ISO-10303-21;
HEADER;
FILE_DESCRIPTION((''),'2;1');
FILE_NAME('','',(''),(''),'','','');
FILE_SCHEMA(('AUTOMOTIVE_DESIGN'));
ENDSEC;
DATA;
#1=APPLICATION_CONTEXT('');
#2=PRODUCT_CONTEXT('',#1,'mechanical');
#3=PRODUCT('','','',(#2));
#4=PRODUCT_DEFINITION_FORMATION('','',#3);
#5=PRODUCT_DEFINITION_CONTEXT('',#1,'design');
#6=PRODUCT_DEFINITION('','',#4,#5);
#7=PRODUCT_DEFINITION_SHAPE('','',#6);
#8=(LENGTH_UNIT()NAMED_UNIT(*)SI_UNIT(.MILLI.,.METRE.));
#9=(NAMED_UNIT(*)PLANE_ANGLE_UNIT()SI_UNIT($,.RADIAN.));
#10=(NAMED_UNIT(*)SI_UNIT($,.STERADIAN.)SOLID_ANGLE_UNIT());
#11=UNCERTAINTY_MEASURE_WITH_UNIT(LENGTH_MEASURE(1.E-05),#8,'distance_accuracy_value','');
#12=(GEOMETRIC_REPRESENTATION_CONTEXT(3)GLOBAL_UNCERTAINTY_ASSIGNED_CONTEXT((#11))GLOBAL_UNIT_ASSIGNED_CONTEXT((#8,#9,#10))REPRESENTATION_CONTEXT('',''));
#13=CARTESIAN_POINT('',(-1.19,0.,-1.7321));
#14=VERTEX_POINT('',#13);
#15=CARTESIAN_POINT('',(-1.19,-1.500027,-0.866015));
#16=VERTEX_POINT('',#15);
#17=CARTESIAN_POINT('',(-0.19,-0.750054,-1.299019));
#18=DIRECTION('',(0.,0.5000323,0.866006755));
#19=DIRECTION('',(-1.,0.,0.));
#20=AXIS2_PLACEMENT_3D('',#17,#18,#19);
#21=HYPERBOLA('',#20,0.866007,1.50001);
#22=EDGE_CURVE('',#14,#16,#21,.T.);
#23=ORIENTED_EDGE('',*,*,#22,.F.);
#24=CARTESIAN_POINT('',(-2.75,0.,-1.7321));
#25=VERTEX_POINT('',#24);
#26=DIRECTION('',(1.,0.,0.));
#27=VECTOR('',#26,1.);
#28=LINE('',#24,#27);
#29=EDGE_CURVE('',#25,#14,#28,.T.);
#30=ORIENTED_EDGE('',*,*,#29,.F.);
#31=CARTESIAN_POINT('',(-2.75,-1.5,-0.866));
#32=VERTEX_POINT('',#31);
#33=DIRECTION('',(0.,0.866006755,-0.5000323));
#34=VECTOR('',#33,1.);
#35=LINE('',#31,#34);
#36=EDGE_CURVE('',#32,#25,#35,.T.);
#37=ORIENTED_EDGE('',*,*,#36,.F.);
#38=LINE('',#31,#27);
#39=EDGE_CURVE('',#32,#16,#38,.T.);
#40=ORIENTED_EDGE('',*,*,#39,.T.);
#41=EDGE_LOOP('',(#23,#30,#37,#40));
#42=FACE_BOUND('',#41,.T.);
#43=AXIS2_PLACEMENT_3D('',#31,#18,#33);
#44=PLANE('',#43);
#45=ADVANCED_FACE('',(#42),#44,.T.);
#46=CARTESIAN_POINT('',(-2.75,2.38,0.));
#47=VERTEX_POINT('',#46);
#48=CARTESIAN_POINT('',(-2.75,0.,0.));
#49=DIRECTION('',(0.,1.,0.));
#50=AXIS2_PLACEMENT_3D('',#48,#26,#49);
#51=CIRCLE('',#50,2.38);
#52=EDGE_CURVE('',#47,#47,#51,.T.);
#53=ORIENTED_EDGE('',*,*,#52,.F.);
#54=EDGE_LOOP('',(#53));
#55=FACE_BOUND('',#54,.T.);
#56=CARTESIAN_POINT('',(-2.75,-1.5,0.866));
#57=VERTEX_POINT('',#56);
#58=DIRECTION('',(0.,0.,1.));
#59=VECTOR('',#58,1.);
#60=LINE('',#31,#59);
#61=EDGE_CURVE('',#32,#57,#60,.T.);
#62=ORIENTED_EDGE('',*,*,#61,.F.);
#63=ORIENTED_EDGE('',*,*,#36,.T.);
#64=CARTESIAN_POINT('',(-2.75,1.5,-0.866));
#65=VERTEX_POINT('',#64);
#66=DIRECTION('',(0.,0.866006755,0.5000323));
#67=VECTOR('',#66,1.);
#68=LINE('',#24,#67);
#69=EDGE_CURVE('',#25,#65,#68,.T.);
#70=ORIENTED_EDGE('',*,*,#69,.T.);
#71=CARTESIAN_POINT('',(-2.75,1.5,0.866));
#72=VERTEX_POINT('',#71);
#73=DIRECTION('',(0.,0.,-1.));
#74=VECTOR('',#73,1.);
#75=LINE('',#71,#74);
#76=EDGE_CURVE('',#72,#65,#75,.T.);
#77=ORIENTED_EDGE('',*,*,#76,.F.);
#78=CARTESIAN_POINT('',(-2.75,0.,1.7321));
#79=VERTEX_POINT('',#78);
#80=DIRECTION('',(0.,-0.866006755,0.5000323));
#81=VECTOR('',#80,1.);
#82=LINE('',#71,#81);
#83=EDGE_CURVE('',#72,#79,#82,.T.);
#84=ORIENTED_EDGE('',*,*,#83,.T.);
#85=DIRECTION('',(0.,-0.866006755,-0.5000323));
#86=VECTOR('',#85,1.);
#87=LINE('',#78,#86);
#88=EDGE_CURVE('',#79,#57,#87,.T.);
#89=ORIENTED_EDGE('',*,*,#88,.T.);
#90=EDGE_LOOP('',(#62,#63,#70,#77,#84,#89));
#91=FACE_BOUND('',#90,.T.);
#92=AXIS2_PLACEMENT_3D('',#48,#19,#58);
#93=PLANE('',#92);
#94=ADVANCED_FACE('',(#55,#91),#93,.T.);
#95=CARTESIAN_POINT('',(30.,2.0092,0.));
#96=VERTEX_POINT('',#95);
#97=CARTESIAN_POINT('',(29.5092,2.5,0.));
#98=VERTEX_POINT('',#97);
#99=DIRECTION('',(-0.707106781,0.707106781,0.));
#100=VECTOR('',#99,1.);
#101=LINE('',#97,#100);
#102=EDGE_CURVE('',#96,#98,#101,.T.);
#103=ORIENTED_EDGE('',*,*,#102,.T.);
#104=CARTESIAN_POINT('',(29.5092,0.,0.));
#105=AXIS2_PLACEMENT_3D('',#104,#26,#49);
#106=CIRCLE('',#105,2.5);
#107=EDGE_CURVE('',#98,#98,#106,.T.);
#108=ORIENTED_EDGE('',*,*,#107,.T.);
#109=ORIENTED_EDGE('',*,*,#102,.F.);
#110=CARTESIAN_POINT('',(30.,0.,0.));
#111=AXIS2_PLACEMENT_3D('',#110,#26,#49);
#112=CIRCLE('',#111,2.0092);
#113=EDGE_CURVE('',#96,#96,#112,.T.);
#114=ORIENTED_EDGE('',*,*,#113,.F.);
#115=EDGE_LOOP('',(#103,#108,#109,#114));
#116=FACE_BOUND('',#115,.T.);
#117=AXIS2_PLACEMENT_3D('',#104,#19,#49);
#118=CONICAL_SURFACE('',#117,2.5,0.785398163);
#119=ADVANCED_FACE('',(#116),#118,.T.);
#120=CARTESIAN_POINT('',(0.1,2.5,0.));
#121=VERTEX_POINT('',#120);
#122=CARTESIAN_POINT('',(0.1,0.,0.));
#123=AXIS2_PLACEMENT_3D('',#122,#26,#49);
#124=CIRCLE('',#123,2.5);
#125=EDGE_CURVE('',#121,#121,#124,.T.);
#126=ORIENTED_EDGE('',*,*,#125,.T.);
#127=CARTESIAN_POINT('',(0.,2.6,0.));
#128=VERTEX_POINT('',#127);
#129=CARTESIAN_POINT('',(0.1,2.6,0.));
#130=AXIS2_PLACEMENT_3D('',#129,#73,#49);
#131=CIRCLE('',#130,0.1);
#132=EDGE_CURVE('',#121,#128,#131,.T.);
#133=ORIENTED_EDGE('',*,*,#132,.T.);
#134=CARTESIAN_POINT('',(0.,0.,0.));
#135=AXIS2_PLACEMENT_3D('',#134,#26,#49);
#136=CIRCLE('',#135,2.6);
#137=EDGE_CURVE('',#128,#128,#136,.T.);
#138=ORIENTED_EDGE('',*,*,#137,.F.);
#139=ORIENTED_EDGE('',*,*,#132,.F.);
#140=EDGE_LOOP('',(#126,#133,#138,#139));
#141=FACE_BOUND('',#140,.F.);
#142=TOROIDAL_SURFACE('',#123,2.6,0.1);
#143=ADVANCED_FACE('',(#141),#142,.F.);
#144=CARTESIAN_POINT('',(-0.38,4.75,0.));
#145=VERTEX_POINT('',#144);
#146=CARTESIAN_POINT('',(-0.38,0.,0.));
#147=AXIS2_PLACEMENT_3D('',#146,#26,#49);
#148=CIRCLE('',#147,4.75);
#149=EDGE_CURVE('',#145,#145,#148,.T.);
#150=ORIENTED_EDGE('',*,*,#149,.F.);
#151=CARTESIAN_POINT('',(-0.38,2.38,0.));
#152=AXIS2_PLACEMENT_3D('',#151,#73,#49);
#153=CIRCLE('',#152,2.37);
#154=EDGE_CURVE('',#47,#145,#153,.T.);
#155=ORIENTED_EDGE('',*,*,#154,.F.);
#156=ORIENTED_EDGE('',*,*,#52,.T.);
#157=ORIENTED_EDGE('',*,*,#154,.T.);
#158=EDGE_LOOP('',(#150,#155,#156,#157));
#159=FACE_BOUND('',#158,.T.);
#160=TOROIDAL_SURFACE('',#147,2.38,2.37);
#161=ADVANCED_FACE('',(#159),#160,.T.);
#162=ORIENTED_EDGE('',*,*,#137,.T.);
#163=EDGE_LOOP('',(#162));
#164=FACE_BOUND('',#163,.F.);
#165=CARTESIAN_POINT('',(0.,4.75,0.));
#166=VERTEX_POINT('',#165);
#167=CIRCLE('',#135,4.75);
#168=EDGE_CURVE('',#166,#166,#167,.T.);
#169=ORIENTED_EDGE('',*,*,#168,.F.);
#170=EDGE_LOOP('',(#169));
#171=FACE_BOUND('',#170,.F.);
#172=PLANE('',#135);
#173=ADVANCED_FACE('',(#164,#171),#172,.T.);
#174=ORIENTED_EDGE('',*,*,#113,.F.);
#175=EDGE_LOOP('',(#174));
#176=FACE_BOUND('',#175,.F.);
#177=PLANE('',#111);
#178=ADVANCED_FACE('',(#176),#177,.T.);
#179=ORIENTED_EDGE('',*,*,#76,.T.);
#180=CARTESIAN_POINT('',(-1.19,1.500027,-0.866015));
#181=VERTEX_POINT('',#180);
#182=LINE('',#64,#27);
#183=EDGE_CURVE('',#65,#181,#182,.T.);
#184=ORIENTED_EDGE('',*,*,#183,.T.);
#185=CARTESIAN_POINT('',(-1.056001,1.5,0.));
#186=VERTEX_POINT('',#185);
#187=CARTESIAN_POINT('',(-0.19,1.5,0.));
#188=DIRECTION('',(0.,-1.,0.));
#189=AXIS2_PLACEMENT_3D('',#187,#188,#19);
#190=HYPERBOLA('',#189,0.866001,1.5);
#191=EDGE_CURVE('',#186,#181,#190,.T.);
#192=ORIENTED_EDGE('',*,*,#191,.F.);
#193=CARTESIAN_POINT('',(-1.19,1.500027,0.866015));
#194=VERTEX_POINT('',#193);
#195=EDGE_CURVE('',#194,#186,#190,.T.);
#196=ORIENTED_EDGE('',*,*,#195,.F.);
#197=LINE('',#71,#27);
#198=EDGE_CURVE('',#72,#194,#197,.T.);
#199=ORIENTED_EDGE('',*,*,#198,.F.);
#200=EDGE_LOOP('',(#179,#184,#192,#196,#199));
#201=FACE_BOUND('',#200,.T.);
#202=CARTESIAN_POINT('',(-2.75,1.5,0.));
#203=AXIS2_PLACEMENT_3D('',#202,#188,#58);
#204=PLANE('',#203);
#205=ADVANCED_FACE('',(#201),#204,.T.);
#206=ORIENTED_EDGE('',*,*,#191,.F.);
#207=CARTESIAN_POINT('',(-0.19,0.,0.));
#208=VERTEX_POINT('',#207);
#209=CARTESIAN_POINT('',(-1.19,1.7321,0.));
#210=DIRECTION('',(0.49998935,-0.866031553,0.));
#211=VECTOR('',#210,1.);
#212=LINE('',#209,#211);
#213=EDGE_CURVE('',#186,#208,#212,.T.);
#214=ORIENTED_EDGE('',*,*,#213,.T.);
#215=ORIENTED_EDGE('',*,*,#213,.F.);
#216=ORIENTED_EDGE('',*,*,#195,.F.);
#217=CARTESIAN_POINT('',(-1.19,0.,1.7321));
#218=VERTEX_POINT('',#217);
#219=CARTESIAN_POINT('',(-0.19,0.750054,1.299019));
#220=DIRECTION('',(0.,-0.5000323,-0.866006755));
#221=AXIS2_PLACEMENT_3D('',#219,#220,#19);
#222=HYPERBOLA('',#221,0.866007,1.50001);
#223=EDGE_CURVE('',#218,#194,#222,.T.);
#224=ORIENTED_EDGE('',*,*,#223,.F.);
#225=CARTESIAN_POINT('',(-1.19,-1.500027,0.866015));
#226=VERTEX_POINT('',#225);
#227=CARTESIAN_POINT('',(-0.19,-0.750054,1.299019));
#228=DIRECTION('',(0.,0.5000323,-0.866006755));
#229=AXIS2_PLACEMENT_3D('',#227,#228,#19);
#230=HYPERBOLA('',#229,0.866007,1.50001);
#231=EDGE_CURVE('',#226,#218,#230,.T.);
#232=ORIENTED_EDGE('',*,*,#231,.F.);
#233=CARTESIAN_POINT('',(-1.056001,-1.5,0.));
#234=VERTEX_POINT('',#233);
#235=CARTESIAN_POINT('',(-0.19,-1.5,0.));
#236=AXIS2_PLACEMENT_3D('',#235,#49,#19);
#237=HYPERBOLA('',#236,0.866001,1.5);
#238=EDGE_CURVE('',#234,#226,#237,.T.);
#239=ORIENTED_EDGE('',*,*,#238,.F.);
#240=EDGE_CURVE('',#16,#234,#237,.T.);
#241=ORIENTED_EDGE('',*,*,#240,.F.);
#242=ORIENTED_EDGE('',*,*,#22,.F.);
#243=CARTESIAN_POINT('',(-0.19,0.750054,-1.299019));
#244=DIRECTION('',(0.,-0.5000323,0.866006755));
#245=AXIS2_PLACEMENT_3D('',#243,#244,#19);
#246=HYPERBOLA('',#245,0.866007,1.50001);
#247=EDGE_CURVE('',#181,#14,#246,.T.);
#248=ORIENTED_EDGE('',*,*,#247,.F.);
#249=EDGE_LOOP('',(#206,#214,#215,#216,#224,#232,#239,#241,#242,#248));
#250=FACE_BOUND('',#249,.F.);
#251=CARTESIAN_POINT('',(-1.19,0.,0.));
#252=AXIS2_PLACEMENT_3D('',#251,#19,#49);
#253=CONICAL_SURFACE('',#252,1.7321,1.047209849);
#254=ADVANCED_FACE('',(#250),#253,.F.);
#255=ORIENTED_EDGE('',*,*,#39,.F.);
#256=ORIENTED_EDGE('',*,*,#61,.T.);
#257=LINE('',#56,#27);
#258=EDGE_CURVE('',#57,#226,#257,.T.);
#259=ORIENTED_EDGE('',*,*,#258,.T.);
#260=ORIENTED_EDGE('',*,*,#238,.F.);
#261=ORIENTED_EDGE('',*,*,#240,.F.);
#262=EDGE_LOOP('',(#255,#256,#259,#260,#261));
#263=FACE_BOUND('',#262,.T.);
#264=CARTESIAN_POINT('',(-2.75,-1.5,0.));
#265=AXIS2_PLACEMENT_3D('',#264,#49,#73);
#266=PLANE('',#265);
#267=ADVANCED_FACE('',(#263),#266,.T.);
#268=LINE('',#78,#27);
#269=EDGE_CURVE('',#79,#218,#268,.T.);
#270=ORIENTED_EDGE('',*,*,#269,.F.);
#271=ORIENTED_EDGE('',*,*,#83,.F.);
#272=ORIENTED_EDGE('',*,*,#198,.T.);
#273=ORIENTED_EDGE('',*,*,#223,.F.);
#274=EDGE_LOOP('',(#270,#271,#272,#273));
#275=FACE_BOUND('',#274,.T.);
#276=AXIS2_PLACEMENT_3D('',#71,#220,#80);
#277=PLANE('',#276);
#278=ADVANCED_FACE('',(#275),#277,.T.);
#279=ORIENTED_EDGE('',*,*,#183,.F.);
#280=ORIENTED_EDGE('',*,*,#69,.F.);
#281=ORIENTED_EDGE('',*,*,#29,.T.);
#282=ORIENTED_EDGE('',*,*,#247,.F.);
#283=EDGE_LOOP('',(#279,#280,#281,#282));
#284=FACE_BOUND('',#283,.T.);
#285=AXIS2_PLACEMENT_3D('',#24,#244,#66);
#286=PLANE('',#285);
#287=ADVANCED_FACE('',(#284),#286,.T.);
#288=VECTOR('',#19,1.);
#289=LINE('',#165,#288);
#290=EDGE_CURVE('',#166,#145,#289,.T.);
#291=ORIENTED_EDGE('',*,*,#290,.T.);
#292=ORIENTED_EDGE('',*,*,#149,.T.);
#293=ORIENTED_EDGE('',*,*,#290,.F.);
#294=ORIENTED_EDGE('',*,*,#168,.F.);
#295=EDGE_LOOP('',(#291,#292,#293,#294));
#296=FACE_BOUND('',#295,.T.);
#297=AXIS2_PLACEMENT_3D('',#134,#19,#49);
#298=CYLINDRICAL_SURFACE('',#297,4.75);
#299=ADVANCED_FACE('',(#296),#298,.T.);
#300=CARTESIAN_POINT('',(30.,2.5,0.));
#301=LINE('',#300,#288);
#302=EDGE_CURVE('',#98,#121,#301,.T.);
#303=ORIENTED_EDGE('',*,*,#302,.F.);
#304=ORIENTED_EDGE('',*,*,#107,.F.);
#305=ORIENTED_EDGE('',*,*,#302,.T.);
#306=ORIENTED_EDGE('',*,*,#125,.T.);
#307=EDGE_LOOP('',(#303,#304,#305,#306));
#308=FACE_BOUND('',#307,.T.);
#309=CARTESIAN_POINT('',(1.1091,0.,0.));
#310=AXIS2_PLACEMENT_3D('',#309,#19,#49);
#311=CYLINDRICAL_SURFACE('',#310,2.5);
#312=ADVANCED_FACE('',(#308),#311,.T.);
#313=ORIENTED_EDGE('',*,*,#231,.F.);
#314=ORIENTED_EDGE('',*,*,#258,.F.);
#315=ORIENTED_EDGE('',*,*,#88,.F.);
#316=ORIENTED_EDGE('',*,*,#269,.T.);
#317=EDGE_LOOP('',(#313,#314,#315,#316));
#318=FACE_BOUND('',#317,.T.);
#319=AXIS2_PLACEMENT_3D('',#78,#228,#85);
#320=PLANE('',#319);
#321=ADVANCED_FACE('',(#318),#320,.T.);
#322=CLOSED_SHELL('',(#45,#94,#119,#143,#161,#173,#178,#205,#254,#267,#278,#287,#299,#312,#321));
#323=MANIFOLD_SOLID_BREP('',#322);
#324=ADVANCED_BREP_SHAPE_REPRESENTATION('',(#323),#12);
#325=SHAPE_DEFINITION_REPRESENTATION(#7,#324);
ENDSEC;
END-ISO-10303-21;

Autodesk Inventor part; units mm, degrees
ref_plane "YZ Plane" through (0, 0, 0) normal (1, 0, 0) x (0, 1, 0)
ref_plane "XZ Plane" through (0, 0, 0) normal (0, 1, 0) x (-1, 0, 0)
sketch "Sketch1" plane through (0, 0, 0) normal (0, 0, 1) x (1, 0, 0)
  line L0 (-0.19, 0) -> (30, 0)
  line L1 (30, 0) -> (30, 2.5)
  line L2 (30, 2.5) -> (1.6, 2.5)
  line L3 (1.6, 2.5) -> (1.1091, 2.5)
  line L4 (1.1091, 2.5) -> (0, 2.5)
  line L5 (0, 2.5) -> (0, 4.75)
  line L6 (0, 4.75) -> (-2.75, 4.75)
  line L7 (-2.75, 4.75) -> (-2.75, 1.7321)
  line L8 (-2.75, 1.7321) -> (-1.19, 1.7321)
  line L9 (-1.19, 1.7321) -> (-0.19, 0)
  line L10 (-9.3, 0) -> (36.55, 0) projected
  line L11 (0, -0.95) -> (0, 5.7) projected
  line L12 (1.6, 2.5) -> (0, 2.5) construction
  dimension "d1" = 28.4
  dimension "d2" = 0.4909
  dimension "d3" = 2.75
  dimension "d4" = 1.56
  dimension "d5" = 60
  dimension "d6" = 5
  dimension "d7" = 5
  dimension "d8" = 3.4641
  dimension "d9" = 9.5
  dimension "d26" = 30
revolve "Body" add sketch "Sketch1" angle 360 about axis through (-0.19, 0, 0) along (1, 0, 0)
sketch "Sketch2" plane through (-2.75, 0, 0) normal (-1, 0, 0) x (0, 0, 1)
  circle A0 centre (0, 0) radius 1.7321 projected
  line L0 (0, -6.65) -> (0, 6.65) projected
  line L1 (-6.65, 0) -> (6.65, 0) projected
  line L2 (1.7321, 0) -> (0.866, -1.5)
  line L3 (0.866, -1.5) -> (-0.866, -1.5)
  line L4 (-0.866, -1.5) -> (-1.7321, 0)
  line L5 (-1.7321, 0) -> (-0.866, 1.5)
  line L6 (-0.866, 1.5) -> (0.866, 1.5)
  line L7 (0.866, 1.5) -> (1.7321, 0)
extrude "Slot" add sketch "Sketch2" against normal up to next contours L7 A0 | A0 L2 | L6 L0 A0 | A0 L0 L3 | L0 L6 A0 | A0 L3 L0 | L4 A0 | A0 L5
fillet "Fillet1" radius 2.37 1 edges at (-2.75, -4.75, 0)
thread "Thread" size "M5x0.8" class "6g" standard "ISO Metric profile" length 28.4
chamfer "Chamfer1" distance 0.4908 distance2 0.4908 1 edges at (30, -2.5, 0) measured on face at (30, -0.5525, -0.0341)
ref_plane "Work Plane1" through (29, 0, 0) normal (0, -1, 0) x (1, 0, 0)
fillet "Fillet2" radius 0.1 1 edges at (0, -2.5, 0)
equation "\"d1\" = GEL"
equation "\"d3\" = KOH"
equation "\"d4\" = INTI"
equation "\"d6\" = GD"
equation "\"d7\" = BDM"
equation "\"d8\" = 1.1547 * SW"
equation "\"d9\" = KOD"
equation "\"d26\" = NLG"
equation "\"d30\" = R"
equation "\"d17\" = RR"
equation "\"d13\" = GEL"
equation "\"d15\" = -0.5 * SPD + 0.5 * GD"
equation "\"d16\" = GUL"
equation "\"GD\" = NND"
equation "\"NLG\" = 30"
equation "\"GEL\" = 28.4"
equation "\"KOD\" = 9.5"
equation "\"KOH\" = 2.75"
equation "\"INTI\" = 1.56"
equation "\"GAL\" = 0.61345 * PTC"
equation "\"GUL\" = 0.61345 * PTC"
equation "\"BDM\" = NND"
equation "\"SW\" = 3"
equation "\"RR\" = 2.37"
equation "\"SPD\" = NND - 1.2269 * PTC"
equation "\"R\" = 0.1"
equation "\"TOA\" = 30deg"
equation "\"GD1\" = THREADDIA - 1.2269 * PTC"
equation "\"THREADDIA\" = 5"
equation "\"PTC\" = 0.8"
equation "\"NND\" = 5"
equation "\"KOH1\" = 0.38"
equation "\"E0\" = 1.155 * SW"
properties part number "BS 4168 - M5 x 30" material "Steel, Mild"
